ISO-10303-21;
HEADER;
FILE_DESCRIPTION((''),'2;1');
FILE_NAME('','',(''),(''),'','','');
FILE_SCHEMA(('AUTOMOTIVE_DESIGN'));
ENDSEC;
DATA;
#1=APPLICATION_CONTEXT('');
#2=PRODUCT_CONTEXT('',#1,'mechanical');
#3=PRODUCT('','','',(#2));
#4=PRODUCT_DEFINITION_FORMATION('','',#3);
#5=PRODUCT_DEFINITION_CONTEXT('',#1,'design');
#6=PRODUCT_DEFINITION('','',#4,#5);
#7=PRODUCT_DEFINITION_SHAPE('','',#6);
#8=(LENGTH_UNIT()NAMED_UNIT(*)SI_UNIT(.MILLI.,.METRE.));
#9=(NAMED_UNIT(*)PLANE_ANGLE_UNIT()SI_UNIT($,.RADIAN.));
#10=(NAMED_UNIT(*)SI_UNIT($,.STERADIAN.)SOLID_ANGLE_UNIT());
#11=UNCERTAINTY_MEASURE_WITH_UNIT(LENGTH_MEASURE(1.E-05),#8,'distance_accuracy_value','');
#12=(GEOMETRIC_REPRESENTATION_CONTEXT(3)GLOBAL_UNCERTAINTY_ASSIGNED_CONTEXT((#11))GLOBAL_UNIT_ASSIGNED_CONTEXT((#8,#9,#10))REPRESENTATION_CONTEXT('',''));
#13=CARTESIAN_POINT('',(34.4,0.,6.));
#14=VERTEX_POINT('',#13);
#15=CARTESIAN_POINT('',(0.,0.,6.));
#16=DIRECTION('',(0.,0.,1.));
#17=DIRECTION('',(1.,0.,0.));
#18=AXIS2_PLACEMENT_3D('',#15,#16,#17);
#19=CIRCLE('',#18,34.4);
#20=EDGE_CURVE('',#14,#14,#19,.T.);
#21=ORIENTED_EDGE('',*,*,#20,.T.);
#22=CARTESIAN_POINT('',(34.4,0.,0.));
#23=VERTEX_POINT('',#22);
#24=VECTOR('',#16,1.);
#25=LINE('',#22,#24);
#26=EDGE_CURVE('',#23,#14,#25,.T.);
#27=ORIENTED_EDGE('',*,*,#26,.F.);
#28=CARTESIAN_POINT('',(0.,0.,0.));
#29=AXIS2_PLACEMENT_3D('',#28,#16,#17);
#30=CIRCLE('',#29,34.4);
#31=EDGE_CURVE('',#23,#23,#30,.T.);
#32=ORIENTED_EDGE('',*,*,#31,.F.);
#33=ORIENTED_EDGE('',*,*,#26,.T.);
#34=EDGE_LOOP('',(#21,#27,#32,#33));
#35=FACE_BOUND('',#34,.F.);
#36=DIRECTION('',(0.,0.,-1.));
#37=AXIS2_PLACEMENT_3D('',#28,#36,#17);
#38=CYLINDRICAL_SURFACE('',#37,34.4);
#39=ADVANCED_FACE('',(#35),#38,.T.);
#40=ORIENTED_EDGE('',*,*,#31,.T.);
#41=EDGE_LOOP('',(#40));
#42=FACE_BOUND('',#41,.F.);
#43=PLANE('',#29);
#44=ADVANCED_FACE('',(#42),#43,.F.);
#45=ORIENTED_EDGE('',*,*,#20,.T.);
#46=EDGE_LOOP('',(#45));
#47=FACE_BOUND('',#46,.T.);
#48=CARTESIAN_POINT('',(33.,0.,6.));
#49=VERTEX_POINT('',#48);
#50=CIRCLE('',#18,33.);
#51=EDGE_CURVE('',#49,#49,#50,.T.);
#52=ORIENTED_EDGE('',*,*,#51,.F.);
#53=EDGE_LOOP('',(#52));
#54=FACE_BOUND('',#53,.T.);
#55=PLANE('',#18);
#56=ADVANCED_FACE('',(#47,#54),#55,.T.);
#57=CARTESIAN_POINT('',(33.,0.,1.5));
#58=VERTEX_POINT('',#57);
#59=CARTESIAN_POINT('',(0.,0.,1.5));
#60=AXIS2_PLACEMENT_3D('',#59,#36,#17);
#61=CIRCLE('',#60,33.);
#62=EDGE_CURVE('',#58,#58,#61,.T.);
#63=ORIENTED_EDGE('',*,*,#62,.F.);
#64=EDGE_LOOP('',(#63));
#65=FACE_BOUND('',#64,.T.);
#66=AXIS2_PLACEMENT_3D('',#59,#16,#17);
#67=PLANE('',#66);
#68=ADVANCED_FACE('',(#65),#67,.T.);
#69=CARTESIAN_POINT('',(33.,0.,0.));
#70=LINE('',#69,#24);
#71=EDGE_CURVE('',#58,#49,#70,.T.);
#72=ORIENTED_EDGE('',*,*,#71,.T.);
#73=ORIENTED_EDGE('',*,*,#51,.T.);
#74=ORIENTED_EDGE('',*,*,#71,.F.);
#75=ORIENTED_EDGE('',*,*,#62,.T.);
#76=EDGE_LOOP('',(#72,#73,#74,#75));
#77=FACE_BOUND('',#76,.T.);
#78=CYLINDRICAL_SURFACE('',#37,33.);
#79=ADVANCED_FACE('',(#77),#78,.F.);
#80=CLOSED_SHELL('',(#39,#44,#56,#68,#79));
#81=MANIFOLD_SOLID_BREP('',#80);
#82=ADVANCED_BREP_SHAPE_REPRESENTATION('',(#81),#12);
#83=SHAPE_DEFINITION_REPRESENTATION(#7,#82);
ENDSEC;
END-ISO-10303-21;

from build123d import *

# Parameters (mm, degrees)
F0_R     = 33.5
F1_DEPTH = 1.5
F2_R     = 34.4
F2_R_2   = 33
F3_DEPTH = 6


# Not quite as in the source:
# - the program builds the solid bodies; features that only make, move or delete a surface that nothing else refers to are left out


with BuildPart() as f1:
    # F0 (on Top) → F1 (new body)
    with BuildSketch(Plane.XY):
        Circle(F0_R)
    extrude(amount=F1_DEPTH)

    # F2 (on Top) → F3 (join)
    with BuildSketch(Plane.XY):
        Circle(F2_R)
        Circle(F2_R_2, mode=Mode.SUBTRACT)
    extrude(amount=F3_DEPTH)


solid = f1.part
